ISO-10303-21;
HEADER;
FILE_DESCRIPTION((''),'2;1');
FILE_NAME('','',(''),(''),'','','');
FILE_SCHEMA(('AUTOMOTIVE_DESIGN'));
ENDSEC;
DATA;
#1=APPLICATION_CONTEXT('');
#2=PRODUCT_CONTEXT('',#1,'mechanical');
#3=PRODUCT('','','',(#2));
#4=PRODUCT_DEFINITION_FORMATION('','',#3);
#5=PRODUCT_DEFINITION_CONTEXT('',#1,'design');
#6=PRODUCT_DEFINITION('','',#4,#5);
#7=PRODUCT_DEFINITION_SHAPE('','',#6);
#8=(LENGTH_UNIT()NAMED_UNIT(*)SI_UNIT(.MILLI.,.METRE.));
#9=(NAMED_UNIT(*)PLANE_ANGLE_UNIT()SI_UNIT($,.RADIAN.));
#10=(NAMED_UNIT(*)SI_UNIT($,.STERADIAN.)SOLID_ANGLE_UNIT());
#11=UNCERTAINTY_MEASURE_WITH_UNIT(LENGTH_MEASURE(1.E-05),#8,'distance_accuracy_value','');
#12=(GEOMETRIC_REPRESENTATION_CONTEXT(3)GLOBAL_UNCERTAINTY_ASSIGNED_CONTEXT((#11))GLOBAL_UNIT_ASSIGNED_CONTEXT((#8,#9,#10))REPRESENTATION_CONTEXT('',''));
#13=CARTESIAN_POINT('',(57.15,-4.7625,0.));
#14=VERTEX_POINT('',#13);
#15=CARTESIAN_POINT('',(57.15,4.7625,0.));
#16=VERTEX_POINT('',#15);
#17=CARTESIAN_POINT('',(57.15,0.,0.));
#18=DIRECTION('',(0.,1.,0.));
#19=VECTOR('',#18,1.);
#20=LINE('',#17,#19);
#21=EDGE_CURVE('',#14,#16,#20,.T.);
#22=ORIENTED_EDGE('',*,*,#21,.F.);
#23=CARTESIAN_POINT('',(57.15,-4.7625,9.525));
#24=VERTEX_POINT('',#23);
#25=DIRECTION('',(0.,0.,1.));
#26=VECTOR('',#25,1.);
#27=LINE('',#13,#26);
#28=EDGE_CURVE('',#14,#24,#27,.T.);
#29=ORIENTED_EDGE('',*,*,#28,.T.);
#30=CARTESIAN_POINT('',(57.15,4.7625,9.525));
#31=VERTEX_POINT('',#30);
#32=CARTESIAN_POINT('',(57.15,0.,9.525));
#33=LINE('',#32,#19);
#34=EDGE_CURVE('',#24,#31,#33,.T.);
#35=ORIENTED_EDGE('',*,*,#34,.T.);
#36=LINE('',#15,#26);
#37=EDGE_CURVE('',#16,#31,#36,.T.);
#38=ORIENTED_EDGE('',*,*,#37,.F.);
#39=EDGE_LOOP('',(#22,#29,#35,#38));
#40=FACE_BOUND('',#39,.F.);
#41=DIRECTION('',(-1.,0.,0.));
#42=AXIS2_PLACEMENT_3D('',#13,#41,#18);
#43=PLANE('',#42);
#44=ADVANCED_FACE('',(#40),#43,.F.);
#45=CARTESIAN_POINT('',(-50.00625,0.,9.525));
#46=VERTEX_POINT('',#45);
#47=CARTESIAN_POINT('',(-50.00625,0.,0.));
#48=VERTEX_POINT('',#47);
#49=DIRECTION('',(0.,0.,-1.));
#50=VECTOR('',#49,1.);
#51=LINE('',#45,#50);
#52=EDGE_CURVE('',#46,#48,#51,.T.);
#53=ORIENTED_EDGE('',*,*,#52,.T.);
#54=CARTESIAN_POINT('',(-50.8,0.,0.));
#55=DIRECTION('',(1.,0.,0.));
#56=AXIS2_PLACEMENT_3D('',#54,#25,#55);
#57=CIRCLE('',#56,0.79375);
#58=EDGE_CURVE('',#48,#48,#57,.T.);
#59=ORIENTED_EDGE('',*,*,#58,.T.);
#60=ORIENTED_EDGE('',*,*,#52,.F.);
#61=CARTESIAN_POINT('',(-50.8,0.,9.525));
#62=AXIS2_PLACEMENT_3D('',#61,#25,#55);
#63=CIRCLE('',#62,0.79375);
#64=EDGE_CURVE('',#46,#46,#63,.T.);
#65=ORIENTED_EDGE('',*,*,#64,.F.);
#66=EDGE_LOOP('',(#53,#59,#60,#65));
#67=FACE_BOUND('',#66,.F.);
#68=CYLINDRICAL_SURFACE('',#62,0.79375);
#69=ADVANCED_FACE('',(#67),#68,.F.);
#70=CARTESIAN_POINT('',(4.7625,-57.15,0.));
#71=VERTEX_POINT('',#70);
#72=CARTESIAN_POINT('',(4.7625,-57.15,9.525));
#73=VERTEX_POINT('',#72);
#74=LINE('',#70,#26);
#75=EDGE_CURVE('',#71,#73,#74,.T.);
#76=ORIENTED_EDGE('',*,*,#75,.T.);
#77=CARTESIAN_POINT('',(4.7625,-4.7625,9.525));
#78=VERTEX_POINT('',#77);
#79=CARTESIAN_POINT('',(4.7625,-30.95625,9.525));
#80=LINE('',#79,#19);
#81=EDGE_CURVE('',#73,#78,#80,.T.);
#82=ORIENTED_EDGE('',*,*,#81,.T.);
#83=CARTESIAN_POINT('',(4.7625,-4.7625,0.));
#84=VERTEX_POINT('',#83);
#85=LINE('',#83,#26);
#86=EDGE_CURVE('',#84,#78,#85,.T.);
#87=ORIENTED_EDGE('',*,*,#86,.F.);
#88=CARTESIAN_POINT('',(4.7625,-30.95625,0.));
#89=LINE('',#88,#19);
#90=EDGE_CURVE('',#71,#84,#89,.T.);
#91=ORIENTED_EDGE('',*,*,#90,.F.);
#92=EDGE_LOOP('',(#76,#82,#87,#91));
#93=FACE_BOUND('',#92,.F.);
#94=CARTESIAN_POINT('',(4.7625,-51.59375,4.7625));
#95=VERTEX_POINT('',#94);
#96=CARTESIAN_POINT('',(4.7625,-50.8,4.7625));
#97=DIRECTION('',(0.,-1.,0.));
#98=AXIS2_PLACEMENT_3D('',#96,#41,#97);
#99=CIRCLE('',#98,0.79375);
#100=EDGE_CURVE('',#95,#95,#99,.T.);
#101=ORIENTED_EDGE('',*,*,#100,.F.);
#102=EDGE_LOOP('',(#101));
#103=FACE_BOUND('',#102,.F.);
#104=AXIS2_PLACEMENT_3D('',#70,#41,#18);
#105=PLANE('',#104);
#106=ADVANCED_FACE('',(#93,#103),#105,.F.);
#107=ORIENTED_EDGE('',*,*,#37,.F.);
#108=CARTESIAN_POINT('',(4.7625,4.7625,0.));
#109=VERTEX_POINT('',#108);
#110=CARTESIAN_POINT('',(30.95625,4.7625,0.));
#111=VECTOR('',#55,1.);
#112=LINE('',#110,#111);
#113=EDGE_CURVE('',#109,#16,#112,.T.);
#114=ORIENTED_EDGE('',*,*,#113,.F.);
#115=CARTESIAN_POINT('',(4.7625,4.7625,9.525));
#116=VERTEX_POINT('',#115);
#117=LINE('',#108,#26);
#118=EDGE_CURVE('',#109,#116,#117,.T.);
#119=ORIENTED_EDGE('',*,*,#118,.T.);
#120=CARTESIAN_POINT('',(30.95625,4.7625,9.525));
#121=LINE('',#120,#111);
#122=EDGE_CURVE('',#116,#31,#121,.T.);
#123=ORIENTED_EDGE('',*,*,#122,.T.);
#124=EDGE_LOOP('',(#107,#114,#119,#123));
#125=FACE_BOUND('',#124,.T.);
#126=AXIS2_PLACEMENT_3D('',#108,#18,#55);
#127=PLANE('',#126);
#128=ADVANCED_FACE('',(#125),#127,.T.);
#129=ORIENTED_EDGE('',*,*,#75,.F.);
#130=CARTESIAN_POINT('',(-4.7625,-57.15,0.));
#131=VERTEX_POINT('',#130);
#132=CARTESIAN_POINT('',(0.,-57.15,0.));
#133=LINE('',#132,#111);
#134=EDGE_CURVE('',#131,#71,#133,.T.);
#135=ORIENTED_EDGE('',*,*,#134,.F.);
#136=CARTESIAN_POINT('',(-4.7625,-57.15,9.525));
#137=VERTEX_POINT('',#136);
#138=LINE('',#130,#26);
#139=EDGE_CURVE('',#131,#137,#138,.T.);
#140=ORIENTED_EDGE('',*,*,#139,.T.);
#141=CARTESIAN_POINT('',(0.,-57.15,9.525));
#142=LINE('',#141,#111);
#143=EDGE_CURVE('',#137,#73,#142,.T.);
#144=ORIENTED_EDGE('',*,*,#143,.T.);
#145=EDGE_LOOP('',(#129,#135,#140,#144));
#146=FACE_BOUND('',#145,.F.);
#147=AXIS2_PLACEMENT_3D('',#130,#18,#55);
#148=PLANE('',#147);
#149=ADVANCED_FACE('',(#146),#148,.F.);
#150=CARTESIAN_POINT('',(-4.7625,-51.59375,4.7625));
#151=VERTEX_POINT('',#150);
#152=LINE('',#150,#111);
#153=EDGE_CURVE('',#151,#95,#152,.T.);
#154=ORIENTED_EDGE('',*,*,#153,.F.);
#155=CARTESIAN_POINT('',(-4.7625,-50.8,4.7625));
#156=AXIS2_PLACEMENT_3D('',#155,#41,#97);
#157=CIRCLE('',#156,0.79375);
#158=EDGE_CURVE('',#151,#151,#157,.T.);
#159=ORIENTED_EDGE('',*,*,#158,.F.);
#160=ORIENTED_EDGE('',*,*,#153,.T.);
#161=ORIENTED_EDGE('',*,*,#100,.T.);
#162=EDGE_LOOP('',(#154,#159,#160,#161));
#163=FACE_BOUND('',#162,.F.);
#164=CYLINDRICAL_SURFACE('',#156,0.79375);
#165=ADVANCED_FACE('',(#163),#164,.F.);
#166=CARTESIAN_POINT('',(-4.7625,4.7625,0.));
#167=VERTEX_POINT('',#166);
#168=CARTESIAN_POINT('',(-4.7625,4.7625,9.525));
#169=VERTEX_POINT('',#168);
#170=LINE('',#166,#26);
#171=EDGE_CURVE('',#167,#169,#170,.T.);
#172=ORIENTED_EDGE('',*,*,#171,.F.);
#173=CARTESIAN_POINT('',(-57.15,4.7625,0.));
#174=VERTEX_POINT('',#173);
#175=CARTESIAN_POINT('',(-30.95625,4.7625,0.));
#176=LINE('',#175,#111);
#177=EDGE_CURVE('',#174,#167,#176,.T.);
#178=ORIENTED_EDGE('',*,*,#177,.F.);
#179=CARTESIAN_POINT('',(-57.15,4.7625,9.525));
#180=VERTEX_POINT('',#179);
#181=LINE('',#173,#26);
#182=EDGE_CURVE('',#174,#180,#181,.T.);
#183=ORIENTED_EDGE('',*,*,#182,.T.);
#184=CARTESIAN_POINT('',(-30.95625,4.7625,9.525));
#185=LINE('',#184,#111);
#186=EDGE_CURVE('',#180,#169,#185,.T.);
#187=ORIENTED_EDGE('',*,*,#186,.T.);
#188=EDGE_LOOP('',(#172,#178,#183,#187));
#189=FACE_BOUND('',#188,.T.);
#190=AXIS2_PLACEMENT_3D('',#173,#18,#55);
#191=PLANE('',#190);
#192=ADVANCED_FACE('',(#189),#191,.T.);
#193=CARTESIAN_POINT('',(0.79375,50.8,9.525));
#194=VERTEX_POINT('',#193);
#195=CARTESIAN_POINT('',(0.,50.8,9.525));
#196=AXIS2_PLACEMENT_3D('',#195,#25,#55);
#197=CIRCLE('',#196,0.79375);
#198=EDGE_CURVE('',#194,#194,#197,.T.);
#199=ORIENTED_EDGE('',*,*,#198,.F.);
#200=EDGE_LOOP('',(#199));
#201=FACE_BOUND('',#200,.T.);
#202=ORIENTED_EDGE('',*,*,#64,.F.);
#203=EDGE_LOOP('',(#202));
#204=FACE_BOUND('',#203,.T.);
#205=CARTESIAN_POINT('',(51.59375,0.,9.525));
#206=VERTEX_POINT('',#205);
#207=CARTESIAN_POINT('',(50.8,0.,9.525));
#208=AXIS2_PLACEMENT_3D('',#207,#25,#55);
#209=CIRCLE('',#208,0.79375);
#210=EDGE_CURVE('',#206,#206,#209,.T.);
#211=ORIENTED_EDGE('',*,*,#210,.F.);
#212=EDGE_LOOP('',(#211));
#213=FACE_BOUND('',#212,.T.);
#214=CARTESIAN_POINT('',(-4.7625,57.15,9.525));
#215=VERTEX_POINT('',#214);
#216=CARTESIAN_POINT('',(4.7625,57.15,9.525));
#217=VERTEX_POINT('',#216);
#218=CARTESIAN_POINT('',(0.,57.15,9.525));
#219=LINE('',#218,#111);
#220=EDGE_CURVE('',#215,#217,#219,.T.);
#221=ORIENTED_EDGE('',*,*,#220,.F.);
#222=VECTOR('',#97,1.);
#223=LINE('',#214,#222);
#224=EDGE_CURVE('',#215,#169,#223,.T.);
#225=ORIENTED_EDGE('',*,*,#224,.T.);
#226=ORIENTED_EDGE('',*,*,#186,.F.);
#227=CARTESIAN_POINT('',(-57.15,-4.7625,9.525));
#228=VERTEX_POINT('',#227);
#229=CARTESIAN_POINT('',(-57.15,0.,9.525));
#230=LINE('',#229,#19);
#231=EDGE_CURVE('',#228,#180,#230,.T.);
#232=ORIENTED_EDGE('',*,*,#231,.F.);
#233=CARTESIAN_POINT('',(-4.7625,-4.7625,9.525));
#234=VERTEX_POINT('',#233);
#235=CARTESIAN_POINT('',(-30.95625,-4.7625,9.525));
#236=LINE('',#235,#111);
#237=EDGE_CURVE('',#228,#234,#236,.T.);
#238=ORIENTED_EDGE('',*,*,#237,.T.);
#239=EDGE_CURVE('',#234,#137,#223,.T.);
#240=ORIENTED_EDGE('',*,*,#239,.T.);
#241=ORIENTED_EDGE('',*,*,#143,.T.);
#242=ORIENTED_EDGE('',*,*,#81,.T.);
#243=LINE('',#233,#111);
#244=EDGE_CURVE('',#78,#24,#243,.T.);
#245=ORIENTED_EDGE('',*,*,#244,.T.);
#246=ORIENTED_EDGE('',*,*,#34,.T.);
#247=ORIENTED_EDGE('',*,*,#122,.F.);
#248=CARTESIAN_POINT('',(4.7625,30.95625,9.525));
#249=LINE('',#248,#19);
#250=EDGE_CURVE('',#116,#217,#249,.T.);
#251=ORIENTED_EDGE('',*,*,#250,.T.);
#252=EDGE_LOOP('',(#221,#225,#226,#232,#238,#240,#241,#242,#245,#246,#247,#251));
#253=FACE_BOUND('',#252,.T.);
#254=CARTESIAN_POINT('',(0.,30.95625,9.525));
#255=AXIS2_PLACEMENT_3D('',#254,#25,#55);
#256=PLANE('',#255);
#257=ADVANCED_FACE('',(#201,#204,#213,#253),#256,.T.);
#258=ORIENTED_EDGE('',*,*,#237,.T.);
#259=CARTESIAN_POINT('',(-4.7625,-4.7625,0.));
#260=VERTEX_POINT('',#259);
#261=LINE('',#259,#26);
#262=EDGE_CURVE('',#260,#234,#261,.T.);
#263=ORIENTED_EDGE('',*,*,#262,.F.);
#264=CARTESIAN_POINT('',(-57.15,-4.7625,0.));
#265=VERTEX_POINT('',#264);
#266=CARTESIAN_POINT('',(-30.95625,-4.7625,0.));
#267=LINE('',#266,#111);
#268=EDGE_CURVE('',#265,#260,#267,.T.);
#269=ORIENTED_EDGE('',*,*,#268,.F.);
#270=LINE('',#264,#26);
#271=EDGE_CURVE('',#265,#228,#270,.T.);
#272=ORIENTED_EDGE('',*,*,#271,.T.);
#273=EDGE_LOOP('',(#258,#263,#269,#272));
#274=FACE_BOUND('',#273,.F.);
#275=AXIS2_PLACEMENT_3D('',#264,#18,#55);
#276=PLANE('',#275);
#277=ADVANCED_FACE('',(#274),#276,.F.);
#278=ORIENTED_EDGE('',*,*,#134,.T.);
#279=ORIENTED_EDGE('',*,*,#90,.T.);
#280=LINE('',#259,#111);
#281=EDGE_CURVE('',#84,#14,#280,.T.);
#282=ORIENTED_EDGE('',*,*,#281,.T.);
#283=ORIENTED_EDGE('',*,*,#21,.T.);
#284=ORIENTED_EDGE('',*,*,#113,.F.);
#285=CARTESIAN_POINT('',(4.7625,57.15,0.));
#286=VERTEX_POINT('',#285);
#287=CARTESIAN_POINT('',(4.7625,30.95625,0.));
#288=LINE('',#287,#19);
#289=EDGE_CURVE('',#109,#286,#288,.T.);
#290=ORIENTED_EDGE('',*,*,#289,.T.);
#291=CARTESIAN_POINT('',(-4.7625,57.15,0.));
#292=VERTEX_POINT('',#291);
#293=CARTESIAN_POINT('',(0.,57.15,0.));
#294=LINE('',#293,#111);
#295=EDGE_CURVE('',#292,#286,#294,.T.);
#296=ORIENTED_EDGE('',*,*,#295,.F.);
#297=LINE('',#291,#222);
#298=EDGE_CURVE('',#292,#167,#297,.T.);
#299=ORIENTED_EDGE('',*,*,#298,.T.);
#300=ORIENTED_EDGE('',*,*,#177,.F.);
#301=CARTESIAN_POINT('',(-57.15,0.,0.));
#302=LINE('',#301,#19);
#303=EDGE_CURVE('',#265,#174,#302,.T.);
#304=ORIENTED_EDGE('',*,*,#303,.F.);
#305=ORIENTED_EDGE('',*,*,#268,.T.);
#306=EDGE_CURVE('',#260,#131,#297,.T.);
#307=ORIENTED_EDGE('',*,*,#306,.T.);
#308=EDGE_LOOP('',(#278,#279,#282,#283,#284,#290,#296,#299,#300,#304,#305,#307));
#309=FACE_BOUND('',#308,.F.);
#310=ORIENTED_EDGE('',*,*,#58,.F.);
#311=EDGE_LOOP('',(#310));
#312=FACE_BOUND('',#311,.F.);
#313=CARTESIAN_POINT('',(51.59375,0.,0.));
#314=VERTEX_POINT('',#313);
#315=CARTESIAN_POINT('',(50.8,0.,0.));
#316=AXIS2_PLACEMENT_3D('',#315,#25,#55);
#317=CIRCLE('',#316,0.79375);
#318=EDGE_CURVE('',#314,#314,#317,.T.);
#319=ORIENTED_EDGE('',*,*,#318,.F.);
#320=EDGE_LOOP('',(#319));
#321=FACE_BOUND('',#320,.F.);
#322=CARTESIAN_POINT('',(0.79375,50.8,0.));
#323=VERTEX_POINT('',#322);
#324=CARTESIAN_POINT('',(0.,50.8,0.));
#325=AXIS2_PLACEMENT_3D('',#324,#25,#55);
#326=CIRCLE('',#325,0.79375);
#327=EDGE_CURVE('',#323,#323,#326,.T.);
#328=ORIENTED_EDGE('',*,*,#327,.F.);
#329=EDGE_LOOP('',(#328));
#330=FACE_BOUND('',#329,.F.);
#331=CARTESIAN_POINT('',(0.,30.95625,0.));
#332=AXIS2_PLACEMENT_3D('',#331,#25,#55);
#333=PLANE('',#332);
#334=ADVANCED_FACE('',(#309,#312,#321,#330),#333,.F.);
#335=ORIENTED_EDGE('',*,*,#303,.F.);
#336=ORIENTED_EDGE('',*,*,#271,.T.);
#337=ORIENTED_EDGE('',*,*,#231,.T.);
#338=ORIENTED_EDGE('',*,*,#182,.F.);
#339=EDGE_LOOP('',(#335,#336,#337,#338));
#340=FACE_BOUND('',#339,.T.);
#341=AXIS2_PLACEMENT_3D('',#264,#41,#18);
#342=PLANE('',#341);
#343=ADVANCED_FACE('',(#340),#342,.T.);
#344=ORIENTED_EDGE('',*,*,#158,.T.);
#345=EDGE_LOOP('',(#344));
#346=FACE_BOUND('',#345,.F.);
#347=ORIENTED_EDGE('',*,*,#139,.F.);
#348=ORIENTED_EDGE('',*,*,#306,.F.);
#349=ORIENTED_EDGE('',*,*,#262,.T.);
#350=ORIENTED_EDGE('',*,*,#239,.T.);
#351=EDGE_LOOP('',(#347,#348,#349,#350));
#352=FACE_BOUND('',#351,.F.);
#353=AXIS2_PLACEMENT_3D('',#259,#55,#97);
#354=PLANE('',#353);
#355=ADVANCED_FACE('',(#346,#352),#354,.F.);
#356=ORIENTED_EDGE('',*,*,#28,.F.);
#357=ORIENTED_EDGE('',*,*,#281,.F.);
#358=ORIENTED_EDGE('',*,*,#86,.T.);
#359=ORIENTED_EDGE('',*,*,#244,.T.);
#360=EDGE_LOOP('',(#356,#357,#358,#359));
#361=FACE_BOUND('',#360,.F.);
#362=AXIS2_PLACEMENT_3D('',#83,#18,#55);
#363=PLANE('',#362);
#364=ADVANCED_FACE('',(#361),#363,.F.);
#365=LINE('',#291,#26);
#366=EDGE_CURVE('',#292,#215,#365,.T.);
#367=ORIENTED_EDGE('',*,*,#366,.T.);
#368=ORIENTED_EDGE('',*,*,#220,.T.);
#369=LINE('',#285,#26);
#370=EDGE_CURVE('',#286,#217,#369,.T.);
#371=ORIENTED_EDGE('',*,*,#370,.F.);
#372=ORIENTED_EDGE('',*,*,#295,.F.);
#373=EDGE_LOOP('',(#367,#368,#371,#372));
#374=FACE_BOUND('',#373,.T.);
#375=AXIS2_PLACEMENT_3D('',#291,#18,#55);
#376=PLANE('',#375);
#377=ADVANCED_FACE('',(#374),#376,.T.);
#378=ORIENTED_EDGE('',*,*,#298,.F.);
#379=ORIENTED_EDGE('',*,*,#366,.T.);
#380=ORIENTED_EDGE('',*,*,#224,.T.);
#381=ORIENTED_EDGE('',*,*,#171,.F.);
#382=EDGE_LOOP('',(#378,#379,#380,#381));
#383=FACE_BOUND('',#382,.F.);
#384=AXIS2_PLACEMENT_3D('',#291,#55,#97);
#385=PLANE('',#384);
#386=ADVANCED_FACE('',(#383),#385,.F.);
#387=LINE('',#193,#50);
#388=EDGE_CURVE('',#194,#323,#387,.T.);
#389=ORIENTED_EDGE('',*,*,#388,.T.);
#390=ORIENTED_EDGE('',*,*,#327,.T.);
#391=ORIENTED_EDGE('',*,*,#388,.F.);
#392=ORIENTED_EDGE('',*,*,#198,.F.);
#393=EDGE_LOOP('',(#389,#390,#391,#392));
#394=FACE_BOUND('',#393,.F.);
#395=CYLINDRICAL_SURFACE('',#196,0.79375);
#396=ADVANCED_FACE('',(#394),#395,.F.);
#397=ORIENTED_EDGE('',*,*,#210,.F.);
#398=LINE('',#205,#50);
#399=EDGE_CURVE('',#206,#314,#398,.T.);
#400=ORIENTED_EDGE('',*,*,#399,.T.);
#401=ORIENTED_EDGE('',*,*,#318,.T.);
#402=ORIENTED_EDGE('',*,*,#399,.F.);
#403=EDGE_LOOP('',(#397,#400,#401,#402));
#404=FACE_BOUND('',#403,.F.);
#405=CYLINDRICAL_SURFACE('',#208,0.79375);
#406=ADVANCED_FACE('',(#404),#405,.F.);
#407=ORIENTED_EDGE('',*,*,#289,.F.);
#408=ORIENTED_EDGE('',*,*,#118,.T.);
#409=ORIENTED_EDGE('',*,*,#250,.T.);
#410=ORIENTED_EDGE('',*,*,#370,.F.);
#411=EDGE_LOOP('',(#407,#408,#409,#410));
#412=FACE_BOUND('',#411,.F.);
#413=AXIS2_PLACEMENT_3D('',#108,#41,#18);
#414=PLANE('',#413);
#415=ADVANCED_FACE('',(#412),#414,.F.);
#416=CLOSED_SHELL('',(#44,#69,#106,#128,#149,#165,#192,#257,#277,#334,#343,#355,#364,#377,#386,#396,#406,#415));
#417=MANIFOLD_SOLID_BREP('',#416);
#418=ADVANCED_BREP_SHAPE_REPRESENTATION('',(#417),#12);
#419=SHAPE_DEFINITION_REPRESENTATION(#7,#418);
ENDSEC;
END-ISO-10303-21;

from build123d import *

# Parameters (mm, degrees)
F0_W     = 9.525
F0_H     = 52.3875
F0_W_2   = 52.3875
F0_H_2   = 9.525
F1_DEPTH = 9.525
F2_R     = 0.79375
F3_DEPTH = 9.525
F4_R     = 0.79375
F5_DEPTH = 9.525
F6_W     = 64.4
F6_H     = 21
F7_DEPTH = 11.15


# Not quite as in the source:
# - a length typed as a fraction of an inch, garbled in the dataset ("3 / 203.2 mm" for 3/8 in), is restored


with BuildPart() as f1:
    # F0 (on Top) → F1 (new body)
    with BuildSketch(Plane.XY):
        with Locations((0, 30.95625)):
            Rectangle(F0_W, F0_H)
        with Locations((30.95625, 0)):
            Rectangle(F0_W_2, F0_H_2)
        Rectangle(F0_W, F0_H_2)
        with Locations((0, -30.95625)):
            Rectangle(F0_W, F0_H)
        with Locations((-30.95625, 0)):
            Rectangle(F0_W_2, F0_H_2)
    extrude(amount=F1_DEPTH)

    # F2 (on face) → F3 (cut)
    with BuildSketch(Plane.XY.offset(9.525)):
        with Locations((0, 50.8)):
            Circle(F2_R)
        with Locations((50.8, 0)):
            Circle(F2_R)
        with Locations((-50.8, 0)):
            Circle(F2_R)
    extrude(amount=-F3_DEPTH, mode=Mode.SUBTRACT)

    # F4 (on face) → F5 (cut)
    with BuildSketch(Plane(origin=(-4.7625, 0, 0), x_dir=(0, -1, 0), z_dir=(-1, 0, 0))):
        with Locations((50.8, 4.7625)):
            Circle(F4_R)
    extrude(amount=-F5_DEPTH, mode=Mode.SUBTRACT)


with BuildPart() as f7:
    # F6 (on Top) → F7 (new body, symmetric)
    with BuildSketch(Plane.XY):
        with Locations((0, 0.8)):
            Rectangle(F6_W, F6_H)
    extrude(amount=F7_DEPTH, both=True)


solid = f1.part
